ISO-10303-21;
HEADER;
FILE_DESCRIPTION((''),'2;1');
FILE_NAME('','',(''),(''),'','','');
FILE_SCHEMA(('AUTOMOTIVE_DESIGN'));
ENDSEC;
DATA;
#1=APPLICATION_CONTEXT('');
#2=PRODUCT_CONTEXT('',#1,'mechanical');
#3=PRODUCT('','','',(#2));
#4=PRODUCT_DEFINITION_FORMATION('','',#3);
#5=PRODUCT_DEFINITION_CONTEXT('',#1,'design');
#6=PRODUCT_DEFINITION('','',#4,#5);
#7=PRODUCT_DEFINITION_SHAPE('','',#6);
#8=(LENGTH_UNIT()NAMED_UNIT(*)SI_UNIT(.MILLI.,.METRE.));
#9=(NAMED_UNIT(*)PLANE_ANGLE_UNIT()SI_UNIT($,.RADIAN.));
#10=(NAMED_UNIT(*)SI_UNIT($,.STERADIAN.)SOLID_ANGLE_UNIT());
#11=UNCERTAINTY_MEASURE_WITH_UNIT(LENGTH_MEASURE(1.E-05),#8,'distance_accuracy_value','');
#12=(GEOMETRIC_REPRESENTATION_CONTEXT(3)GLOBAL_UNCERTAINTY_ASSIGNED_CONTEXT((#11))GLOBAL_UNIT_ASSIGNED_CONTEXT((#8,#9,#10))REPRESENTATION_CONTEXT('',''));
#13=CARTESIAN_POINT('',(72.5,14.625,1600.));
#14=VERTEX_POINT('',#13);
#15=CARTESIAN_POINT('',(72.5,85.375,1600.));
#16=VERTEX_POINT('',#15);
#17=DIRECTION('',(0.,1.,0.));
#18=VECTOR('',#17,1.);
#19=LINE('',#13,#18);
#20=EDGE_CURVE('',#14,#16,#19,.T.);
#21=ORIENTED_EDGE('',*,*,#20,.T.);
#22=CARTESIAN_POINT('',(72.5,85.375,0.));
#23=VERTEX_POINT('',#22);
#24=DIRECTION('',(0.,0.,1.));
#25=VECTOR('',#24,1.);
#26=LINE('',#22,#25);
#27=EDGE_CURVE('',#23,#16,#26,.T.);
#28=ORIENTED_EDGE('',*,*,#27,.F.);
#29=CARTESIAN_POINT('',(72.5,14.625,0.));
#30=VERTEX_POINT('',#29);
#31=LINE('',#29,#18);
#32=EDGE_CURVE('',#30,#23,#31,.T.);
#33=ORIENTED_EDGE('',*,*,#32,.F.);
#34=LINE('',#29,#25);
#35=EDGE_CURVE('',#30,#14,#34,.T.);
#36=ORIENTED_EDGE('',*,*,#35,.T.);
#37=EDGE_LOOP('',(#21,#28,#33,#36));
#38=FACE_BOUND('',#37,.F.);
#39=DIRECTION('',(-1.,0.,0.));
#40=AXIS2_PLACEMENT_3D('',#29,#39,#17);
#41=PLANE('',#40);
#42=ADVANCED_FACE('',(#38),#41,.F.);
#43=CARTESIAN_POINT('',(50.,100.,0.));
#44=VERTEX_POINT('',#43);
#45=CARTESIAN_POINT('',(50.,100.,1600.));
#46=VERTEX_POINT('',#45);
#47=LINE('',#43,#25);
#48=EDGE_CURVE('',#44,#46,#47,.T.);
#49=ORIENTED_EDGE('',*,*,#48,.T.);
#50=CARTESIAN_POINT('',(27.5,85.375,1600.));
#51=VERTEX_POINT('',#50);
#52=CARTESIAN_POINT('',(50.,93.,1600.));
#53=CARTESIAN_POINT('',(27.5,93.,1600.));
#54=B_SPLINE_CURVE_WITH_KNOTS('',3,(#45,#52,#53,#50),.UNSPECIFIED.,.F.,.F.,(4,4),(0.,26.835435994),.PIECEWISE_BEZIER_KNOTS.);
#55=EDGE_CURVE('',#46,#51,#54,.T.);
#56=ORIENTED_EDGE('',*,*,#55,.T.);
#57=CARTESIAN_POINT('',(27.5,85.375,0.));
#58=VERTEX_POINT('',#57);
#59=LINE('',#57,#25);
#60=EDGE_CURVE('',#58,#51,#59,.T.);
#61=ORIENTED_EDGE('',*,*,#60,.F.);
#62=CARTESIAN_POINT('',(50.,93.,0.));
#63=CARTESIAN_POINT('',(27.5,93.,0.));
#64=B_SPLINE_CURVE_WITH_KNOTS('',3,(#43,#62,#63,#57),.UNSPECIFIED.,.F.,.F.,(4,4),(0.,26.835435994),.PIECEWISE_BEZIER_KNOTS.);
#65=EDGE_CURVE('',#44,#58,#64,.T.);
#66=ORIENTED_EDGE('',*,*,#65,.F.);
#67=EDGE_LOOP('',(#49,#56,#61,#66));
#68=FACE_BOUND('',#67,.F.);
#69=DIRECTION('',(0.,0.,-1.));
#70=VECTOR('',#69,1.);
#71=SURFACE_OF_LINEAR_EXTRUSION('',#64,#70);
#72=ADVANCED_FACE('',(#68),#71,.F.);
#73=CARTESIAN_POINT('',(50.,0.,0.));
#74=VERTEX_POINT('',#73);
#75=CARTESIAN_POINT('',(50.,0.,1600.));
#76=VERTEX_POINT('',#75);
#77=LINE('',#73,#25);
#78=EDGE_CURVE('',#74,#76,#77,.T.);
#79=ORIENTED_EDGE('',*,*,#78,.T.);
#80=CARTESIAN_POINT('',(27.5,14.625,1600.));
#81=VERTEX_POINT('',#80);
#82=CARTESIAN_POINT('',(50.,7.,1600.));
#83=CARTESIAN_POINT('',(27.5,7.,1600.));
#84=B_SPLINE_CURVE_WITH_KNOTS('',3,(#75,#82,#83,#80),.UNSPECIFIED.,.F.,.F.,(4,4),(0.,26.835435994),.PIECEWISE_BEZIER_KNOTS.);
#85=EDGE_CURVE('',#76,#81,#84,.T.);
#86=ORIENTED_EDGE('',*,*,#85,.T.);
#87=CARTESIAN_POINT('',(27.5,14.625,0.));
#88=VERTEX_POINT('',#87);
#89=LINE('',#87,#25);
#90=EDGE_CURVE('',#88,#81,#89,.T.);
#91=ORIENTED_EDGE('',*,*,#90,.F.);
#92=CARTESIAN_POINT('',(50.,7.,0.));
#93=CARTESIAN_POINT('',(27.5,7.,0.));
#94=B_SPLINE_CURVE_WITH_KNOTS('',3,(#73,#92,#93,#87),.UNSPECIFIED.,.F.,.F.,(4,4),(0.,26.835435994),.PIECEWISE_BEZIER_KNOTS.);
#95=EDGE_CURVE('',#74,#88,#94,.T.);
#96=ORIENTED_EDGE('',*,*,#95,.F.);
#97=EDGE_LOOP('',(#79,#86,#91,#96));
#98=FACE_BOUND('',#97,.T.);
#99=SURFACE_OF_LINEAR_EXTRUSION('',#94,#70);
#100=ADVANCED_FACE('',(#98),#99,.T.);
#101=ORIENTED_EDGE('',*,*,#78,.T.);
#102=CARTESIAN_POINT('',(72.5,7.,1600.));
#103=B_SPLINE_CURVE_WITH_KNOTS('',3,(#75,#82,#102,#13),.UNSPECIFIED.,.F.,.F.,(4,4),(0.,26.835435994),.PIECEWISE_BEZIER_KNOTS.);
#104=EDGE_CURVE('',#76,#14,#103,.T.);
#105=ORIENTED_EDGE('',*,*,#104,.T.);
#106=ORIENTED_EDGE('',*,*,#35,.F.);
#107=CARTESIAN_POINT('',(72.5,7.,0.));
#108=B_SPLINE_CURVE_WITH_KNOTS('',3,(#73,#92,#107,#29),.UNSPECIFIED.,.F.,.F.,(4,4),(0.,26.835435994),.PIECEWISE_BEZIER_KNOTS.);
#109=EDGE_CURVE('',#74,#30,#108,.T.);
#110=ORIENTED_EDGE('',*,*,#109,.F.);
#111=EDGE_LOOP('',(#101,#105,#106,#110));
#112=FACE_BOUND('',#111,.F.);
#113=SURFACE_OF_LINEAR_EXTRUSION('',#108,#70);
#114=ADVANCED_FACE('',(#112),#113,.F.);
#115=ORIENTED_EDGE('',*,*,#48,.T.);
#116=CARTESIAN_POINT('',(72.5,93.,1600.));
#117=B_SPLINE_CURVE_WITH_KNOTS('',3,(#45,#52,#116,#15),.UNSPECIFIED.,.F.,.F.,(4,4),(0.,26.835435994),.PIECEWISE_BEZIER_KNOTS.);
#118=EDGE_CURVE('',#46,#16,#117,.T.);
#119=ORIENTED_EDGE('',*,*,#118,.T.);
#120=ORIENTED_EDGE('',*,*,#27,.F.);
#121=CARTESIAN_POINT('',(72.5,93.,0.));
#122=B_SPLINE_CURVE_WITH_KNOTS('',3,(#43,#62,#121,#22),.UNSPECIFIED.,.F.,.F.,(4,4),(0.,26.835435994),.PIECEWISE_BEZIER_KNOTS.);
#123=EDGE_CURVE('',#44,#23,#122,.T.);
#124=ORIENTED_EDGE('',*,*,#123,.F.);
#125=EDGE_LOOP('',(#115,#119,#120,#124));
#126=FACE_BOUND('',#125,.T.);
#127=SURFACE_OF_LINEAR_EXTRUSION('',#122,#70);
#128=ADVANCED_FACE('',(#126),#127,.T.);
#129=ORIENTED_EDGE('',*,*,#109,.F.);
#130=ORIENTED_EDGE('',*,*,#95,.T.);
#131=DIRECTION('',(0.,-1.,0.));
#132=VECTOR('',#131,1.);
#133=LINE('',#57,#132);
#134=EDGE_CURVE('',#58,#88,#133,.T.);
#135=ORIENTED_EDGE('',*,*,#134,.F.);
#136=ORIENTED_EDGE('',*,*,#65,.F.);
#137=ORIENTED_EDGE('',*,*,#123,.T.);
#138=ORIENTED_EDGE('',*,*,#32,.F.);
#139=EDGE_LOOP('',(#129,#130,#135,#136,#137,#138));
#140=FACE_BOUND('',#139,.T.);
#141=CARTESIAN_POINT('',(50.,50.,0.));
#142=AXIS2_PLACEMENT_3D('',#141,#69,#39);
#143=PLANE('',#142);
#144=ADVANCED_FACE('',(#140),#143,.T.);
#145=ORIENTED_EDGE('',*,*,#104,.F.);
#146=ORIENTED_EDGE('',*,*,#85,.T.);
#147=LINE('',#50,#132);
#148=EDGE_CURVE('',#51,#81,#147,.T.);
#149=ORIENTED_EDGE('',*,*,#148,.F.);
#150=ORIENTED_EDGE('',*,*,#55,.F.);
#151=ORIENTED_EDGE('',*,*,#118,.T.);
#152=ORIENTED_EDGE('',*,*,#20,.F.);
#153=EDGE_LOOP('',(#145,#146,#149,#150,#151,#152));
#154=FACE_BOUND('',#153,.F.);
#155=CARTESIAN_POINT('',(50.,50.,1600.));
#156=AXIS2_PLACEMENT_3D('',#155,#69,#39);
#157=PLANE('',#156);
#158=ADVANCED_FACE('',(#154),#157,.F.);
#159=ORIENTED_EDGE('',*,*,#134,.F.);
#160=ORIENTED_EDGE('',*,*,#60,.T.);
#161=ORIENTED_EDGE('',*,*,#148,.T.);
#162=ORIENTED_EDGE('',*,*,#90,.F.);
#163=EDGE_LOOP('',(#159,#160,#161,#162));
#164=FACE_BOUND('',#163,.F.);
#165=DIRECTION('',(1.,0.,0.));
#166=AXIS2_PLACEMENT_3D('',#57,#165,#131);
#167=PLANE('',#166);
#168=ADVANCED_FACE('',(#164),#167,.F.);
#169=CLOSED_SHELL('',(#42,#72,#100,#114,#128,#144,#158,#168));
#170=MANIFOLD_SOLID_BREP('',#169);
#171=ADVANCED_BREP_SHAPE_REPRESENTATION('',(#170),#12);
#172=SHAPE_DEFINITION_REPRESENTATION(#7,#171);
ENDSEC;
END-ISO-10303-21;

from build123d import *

# Parameters (mm, degrees)
F2_DEPTH = 1600


# Not quite as in the source:
# - a feature of the source that left no trace in its solid (it failed there, or was rolled back) is left out


with BuildPart() as f2:
    # F0 (on Top) → F2 (new body)
    with BuildSketch(Plane.XY):
        with BuildLine():
            add(Edge.make_bspline(
                [(50, 0), (50, 7), (27.5, 7), (27.5, 14.625)],
                knots=[0, 0, 0, 0, 26.8354359942, 26.8354359942, 26.8354359942, 26.8354359942], degree=3))
            add(Edge.make_bspline(
                [(50, 0), (50, 7), (72.5, 7), (72.5, 14.625)],
                knots=[0, 0, 0, 0, 26.8354359942, 26.8354359942, 26.8354359942, 26.8354359942], degree=3))
            Line((72.5, 14.625), (72.5, 85.375))
            add(Edge.make_bspline(
                [(50, 100), (50, 93), (72.5, 93), (72.5, 85.375)],
                knots=[0, 0, 0, 0, 26.8354359942, 26.8354359942, 26.8354359942, 26.8354359942], degree=3))
            add(Edge.make_bspline(
                [(50, 100), (50, 93), (27.5, 93), (27.5, 85.375)],
                knots=[0, 0, 0, 0, 26.8354359942, 26.8354359942, 26.8354359942, 26.8354359942], degree=3))
            Line((27.5, 85.375), (27.5, 14.625))
        make_face()
    extrude(amount=F2_DEPTH)


solid = f2.part
